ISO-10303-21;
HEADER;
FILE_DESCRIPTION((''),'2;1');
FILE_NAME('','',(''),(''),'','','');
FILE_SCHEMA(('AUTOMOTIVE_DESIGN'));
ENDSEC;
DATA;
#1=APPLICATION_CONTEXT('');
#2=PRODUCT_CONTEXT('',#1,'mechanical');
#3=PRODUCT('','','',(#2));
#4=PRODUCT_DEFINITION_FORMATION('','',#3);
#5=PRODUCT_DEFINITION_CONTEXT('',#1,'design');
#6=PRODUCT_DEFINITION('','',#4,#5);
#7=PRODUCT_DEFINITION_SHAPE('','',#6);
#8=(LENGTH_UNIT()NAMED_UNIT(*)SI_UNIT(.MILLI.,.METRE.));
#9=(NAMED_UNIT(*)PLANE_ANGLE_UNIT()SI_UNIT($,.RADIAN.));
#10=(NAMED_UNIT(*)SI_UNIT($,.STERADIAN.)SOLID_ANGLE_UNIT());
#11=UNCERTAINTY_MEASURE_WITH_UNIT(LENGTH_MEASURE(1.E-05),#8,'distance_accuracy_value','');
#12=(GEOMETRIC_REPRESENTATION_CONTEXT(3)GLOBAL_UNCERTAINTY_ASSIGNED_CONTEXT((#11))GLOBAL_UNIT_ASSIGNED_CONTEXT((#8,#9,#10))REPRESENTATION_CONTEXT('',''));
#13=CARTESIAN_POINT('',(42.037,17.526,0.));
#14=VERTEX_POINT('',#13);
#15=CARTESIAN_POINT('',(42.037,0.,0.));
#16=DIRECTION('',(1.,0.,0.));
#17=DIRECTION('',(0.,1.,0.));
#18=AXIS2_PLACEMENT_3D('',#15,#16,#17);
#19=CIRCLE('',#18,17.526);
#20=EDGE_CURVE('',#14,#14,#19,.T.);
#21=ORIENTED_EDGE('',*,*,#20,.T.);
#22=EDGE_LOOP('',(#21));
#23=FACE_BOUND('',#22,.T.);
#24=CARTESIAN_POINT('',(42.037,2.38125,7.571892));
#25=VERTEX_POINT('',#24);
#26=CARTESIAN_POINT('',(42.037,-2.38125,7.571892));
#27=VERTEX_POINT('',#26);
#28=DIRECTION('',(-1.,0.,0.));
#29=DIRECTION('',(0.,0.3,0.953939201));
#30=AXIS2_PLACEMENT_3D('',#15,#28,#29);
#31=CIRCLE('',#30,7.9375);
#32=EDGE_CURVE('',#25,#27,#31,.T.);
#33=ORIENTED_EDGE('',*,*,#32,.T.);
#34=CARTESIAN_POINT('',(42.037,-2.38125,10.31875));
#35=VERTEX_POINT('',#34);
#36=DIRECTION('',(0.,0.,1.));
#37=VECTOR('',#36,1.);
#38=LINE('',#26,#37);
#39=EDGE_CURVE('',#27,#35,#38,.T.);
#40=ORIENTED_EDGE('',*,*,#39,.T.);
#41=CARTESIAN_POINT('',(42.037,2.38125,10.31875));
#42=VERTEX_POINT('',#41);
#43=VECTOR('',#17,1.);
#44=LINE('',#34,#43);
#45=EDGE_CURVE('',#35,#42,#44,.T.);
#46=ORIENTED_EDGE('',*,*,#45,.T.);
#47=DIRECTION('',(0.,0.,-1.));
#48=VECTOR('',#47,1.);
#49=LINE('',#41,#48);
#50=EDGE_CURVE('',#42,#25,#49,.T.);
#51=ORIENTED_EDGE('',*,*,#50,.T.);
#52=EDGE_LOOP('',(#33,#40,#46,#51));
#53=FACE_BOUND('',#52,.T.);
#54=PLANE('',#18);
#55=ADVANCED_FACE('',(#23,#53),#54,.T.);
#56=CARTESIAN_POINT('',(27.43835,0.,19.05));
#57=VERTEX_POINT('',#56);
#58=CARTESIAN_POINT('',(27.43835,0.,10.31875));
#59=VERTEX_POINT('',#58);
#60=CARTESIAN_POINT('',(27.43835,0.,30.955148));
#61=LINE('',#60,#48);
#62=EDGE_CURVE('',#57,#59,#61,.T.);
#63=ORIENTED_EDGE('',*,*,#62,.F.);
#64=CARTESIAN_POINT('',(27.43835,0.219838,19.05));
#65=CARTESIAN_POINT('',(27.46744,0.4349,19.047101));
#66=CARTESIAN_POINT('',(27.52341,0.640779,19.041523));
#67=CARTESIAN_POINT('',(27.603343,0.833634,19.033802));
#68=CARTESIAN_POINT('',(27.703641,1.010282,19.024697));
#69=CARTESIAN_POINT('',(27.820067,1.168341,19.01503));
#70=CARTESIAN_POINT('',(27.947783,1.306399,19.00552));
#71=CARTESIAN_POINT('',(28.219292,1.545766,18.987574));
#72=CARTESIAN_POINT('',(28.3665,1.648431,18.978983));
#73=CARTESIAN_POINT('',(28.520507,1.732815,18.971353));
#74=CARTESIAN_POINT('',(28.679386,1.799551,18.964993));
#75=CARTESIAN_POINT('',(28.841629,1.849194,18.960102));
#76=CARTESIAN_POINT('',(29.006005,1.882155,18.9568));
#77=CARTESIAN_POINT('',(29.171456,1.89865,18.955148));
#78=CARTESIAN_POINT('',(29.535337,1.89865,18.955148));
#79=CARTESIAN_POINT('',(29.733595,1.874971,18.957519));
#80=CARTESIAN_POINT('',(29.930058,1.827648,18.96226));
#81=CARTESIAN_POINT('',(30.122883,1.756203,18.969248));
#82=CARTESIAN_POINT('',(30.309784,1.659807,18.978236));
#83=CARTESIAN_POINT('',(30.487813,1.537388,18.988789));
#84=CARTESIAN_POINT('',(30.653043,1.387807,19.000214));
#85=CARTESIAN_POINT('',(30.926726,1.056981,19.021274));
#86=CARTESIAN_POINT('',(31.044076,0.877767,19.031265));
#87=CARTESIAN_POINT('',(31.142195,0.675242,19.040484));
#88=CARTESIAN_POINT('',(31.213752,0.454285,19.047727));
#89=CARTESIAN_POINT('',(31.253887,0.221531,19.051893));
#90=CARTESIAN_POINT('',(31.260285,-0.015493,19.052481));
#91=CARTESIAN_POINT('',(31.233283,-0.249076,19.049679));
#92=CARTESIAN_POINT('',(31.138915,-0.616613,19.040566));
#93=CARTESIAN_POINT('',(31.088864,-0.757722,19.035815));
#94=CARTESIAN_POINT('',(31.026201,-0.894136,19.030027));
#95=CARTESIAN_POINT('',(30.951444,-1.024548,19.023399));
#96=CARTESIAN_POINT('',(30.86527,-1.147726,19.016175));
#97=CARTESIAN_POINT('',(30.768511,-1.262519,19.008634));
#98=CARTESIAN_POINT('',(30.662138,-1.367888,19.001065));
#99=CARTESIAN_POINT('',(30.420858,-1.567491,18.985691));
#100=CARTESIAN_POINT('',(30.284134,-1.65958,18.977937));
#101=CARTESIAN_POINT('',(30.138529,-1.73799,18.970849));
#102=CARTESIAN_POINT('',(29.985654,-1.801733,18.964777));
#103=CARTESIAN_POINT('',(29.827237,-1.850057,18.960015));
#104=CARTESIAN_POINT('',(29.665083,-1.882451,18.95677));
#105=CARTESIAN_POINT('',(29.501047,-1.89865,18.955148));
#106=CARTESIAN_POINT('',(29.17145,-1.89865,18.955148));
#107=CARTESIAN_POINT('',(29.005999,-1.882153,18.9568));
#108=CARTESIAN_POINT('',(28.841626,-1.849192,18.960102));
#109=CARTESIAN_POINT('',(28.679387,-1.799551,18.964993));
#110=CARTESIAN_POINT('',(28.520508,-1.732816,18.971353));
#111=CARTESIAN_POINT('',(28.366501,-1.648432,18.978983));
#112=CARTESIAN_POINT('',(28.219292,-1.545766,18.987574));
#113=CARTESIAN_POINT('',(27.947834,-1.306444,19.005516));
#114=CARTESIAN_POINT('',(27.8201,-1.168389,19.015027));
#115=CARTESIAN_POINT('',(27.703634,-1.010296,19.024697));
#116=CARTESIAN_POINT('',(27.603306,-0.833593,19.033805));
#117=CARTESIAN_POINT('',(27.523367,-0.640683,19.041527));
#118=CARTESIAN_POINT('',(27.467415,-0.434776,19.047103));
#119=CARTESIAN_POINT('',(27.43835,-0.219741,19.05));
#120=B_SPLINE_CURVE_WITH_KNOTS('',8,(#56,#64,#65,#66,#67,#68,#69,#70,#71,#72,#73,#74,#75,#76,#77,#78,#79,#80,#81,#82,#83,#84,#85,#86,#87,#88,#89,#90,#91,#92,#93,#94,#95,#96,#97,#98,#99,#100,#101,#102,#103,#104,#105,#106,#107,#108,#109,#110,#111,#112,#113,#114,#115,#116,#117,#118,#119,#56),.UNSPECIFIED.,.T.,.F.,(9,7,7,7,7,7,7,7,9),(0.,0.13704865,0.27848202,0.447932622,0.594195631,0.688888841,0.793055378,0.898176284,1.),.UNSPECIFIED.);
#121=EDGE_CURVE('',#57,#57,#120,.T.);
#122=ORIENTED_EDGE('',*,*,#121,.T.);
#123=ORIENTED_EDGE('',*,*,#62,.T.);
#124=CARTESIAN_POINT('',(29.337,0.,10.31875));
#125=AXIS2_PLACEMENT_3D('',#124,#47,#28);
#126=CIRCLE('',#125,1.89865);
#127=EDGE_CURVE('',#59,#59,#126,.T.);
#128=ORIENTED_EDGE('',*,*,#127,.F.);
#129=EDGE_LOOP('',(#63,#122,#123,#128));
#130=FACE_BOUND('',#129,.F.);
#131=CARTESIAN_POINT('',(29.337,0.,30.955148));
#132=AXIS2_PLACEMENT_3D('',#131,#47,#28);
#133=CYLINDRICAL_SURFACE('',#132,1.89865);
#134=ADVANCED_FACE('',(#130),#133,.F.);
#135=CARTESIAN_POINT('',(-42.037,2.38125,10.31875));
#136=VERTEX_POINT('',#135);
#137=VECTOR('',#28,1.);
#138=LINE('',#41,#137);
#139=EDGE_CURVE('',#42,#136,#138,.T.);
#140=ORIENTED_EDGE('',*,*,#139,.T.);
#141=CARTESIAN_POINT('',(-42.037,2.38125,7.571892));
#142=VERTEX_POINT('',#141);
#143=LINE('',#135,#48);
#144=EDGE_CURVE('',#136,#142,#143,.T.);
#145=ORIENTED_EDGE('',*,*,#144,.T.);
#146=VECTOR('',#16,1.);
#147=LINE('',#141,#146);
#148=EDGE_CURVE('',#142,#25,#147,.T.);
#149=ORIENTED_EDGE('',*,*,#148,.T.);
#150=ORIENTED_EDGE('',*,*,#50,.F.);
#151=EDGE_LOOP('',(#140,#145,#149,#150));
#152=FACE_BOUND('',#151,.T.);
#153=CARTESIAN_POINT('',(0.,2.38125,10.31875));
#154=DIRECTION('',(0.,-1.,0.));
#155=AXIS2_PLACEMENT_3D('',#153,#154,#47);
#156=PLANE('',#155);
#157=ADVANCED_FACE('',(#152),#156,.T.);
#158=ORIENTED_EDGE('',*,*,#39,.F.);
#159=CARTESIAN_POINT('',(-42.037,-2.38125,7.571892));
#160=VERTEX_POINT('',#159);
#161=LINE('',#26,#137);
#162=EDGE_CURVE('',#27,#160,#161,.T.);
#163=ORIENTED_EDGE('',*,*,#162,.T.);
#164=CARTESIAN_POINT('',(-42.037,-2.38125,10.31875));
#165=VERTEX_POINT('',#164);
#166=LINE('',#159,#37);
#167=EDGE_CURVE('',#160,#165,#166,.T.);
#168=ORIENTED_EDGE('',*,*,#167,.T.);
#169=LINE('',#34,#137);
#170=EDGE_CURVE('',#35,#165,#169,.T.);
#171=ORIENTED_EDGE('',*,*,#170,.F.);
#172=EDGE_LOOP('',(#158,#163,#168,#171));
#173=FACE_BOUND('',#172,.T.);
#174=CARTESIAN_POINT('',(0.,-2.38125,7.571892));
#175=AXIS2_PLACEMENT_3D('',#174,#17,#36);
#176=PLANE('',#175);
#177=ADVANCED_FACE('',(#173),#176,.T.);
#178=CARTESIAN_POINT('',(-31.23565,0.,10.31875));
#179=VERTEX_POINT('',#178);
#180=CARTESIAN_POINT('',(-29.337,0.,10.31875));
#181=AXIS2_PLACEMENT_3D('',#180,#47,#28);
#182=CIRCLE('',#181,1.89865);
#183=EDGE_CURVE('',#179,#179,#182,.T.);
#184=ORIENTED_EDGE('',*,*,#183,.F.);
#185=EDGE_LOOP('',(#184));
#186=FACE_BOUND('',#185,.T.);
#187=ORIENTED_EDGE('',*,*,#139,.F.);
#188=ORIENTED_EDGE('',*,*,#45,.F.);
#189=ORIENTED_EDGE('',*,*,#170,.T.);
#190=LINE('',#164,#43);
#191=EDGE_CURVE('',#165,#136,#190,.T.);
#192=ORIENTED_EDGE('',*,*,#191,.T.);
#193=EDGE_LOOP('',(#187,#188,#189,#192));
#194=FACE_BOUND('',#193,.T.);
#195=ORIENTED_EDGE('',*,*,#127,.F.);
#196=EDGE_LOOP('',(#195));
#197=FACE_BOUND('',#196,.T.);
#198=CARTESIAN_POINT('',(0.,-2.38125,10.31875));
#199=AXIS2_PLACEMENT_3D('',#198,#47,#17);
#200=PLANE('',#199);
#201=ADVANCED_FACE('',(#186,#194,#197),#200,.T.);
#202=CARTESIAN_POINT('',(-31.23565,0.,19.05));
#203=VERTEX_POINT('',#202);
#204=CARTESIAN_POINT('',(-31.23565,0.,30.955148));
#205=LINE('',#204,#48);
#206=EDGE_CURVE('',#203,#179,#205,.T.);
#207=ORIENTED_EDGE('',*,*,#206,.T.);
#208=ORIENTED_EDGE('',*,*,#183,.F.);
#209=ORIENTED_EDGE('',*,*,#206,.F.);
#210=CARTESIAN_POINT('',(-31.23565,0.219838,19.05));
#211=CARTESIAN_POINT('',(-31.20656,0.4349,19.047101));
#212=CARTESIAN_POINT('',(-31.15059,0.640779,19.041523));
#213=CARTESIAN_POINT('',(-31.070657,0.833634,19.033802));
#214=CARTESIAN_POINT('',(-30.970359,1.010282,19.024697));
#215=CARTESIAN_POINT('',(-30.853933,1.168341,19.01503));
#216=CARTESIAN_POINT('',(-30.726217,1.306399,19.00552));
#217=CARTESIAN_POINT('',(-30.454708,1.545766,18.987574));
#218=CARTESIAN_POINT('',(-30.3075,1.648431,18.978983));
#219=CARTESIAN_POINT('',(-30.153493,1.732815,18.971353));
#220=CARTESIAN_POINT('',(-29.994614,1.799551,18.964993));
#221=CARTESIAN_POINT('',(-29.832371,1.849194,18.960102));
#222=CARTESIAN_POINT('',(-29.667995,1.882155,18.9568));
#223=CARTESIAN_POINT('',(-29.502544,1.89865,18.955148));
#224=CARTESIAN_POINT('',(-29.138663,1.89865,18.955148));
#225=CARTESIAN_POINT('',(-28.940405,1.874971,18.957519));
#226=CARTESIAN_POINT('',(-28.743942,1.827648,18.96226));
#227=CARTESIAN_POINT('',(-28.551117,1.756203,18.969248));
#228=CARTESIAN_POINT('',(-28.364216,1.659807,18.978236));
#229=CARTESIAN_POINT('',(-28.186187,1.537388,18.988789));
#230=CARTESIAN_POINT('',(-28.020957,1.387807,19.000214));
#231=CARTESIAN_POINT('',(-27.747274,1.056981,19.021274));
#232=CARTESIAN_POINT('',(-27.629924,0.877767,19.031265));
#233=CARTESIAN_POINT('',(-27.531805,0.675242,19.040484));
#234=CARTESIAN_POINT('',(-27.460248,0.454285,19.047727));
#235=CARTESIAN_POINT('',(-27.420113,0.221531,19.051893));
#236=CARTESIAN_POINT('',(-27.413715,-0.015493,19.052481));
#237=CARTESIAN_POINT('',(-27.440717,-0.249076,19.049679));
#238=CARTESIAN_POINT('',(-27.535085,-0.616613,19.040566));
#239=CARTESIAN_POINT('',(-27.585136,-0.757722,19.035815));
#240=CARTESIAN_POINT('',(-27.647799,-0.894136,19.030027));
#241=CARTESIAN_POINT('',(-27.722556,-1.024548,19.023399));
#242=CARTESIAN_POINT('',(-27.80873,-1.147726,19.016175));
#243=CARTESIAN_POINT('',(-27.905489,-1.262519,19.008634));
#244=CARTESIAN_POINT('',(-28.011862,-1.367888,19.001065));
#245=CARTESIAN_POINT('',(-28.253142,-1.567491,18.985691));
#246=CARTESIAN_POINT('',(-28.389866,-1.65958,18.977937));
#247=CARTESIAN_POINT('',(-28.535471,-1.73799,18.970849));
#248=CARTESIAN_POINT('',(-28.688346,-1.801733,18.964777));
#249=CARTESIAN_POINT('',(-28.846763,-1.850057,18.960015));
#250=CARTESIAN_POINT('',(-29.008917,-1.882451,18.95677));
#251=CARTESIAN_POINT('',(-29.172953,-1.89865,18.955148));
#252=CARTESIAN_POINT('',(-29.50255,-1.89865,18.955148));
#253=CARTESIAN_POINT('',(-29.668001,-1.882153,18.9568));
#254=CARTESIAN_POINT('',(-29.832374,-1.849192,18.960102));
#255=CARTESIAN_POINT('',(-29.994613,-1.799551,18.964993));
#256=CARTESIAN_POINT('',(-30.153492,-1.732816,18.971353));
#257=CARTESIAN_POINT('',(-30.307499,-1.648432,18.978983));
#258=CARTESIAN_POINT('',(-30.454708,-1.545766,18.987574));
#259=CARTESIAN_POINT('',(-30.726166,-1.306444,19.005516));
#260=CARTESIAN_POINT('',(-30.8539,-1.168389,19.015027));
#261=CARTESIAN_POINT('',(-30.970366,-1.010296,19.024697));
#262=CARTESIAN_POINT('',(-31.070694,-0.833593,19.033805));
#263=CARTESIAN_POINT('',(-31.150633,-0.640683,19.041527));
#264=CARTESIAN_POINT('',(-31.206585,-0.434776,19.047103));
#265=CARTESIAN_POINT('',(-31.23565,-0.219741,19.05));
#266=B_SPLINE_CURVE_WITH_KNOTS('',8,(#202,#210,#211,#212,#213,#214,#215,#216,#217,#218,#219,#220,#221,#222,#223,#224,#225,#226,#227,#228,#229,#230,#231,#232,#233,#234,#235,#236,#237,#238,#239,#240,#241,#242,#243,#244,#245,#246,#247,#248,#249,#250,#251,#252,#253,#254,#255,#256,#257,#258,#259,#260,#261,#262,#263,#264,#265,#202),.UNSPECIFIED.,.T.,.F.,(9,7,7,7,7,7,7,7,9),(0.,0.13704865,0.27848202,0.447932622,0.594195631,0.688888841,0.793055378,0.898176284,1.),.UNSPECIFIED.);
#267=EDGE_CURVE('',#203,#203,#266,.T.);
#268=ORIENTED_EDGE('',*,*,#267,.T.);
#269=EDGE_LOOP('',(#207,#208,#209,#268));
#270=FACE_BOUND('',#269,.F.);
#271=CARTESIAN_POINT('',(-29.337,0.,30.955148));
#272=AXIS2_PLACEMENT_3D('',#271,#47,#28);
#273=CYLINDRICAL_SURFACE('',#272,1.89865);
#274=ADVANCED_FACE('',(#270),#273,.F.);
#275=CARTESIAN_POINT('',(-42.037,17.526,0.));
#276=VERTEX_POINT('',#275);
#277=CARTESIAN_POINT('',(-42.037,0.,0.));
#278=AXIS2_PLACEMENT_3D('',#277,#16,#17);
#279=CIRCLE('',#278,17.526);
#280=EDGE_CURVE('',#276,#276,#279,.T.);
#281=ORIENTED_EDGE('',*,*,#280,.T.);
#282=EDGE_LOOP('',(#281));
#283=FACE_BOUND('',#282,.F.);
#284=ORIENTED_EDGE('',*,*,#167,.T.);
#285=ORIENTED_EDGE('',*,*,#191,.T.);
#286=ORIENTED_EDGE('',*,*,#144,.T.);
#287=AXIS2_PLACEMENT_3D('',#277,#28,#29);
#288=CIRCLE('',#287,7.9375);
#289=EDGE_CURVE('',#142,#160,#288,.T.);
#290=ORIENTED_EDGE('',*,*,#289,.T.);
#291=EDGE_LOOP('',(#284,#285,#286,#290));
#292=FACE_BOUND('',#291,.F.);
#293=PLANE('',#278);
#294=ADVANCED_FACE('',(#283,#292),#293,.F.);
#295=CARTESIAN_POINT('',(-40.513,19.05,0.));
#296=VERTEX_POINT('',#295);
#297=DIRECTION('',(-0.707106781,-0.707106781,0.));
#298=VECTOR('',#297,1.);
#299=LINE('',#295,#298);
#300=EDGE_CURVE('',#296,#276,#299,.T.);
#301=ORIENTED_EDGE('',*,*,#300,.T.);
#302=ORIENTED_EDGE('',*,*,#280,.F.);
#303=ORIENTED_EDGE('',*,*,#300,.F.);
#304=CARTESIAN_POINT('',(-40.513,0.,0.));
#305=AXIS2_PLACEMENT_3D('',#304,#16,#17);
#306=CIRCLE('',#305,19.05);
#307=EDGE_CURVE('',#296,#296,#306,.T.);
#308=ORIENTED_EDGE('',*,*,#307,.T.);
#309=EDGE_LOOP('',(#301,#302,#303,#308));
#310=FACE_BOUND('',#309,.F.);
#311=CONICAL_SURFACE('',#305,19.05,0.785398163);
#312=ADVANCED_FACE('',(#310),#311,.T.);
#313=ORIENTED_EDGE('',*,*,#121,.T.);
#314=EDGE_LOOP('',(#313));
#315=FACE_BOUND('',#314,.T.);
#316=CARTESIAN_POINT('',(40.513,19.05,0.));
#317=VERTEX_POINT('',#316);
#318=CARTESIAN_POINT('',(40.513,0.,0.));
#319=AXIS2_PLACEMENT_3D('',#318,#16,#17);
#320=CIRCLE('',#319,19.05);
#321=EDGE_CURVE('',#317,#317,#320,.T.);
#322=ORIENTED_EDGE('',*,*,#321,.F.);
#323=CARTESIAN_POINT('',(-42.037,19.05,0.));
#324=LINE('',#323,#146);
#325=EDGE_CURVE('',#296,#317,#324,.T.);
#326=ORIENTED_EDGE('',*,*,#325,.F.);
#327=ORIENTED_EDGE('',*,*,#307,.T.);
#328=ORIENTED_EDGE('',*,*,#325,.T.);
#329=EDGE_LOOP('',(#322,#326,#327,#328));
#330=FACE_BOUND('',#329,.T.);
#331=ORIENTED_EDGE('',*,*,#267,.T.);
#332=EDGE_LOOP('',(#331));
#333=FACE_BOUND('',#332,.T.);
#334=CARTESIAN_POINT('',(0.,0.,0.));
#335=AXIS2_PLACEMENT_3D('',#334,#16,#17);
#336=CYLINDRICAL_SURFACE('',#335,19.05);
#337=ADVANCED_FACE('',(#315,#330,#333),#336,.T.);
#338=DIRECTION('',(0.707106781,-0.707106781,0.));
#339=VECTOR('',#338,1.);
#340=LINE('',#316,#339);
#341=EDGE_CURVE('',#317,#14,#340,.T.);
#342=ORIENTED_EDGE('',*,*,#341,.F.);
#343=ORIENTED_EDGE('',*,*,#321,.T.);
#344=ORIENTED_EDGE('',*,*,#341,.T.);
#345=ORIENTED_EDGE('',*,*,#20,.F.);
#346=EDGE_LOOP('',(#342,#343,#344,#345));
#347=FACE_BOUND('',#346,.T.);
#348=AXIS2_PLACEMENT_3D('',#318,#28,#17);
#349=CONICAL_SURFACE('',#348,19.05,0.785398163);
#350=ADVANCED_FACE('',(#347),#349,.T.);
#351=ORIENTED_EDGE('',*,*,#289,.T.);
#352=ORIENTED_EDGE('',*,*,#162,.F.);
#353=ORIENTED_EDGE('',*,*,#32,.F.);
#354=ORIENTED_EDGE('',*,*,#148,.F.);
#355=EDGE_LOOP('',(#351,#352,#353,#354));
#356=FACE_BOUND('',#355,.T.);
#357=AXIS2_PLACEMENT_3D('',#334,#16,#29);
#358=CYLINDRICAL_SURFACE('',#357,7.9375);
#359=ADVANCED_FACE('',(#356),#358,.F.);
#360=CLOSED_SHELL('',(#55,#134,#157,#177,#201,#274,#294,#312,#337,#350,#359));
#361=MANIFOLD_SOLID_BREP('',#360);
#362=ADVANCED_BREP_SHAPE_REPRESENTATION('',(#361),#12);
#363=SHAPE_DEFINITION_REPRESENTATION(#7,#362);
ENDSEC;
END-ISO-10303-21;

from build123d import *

# Parameters (mm, degrees)
F0_R     = 19.05
F1_DEPTH = 42.037
F4_D     = 3.7973
F4_DEPTH = 12
F4_START = 0.0948523
F4_TIP   = 1.1408240143
F5_SIZE  = 1.524


with BuildPart() as f1:
    # F0 (on Right) → F1 (new body, symmetric)
    with BuildSketch(Plane.YZ):
        Circle(F0_R)
        with BuildLine():
            ThreePointArc((2.38125, 7.5718924112), (0, -7.9375), (-2.38125, 7.5718924112))
            Line((-2.38125, 7.5718924112), (-2.38125, 10.31875))
            Line((-2.38125, 10.31875), (2.38125, 10.31875))
            Line((2.38125, 10.31875), (2.38125, 7.5718924112))
        make_face(mode=Mode.SUBTRACT)
    extrude(amount=F1_DEPTH, both=True)

    # F4
    # its depths count from where the whole tool has entered the part; down to there all is cleared
    with Locations(Plane.XY.offset(19.05).offset(-F4_START)):
        with Locations((29.337, 0), (-29.337, 0)):
            Hole(F4_D / 2, depth=F4_DEPTH)
            with Locations((0, 0, -(F4_DEPTH + F4_TIP / 2))):  # 118° drill point
                Cone(0, F4_D / 2, F4_TIP, mode=Mode.SUBTRACT)

    # F5
    f5_edges = [f1.edges().sort_by_distance(p)[0] for p in [
        (42.037, -19.05, 0),
        (-42.037, -19.05, 0),
    ]]
    chamfer(f5_edges, length=F5_SIZE)


solid = f1.part
